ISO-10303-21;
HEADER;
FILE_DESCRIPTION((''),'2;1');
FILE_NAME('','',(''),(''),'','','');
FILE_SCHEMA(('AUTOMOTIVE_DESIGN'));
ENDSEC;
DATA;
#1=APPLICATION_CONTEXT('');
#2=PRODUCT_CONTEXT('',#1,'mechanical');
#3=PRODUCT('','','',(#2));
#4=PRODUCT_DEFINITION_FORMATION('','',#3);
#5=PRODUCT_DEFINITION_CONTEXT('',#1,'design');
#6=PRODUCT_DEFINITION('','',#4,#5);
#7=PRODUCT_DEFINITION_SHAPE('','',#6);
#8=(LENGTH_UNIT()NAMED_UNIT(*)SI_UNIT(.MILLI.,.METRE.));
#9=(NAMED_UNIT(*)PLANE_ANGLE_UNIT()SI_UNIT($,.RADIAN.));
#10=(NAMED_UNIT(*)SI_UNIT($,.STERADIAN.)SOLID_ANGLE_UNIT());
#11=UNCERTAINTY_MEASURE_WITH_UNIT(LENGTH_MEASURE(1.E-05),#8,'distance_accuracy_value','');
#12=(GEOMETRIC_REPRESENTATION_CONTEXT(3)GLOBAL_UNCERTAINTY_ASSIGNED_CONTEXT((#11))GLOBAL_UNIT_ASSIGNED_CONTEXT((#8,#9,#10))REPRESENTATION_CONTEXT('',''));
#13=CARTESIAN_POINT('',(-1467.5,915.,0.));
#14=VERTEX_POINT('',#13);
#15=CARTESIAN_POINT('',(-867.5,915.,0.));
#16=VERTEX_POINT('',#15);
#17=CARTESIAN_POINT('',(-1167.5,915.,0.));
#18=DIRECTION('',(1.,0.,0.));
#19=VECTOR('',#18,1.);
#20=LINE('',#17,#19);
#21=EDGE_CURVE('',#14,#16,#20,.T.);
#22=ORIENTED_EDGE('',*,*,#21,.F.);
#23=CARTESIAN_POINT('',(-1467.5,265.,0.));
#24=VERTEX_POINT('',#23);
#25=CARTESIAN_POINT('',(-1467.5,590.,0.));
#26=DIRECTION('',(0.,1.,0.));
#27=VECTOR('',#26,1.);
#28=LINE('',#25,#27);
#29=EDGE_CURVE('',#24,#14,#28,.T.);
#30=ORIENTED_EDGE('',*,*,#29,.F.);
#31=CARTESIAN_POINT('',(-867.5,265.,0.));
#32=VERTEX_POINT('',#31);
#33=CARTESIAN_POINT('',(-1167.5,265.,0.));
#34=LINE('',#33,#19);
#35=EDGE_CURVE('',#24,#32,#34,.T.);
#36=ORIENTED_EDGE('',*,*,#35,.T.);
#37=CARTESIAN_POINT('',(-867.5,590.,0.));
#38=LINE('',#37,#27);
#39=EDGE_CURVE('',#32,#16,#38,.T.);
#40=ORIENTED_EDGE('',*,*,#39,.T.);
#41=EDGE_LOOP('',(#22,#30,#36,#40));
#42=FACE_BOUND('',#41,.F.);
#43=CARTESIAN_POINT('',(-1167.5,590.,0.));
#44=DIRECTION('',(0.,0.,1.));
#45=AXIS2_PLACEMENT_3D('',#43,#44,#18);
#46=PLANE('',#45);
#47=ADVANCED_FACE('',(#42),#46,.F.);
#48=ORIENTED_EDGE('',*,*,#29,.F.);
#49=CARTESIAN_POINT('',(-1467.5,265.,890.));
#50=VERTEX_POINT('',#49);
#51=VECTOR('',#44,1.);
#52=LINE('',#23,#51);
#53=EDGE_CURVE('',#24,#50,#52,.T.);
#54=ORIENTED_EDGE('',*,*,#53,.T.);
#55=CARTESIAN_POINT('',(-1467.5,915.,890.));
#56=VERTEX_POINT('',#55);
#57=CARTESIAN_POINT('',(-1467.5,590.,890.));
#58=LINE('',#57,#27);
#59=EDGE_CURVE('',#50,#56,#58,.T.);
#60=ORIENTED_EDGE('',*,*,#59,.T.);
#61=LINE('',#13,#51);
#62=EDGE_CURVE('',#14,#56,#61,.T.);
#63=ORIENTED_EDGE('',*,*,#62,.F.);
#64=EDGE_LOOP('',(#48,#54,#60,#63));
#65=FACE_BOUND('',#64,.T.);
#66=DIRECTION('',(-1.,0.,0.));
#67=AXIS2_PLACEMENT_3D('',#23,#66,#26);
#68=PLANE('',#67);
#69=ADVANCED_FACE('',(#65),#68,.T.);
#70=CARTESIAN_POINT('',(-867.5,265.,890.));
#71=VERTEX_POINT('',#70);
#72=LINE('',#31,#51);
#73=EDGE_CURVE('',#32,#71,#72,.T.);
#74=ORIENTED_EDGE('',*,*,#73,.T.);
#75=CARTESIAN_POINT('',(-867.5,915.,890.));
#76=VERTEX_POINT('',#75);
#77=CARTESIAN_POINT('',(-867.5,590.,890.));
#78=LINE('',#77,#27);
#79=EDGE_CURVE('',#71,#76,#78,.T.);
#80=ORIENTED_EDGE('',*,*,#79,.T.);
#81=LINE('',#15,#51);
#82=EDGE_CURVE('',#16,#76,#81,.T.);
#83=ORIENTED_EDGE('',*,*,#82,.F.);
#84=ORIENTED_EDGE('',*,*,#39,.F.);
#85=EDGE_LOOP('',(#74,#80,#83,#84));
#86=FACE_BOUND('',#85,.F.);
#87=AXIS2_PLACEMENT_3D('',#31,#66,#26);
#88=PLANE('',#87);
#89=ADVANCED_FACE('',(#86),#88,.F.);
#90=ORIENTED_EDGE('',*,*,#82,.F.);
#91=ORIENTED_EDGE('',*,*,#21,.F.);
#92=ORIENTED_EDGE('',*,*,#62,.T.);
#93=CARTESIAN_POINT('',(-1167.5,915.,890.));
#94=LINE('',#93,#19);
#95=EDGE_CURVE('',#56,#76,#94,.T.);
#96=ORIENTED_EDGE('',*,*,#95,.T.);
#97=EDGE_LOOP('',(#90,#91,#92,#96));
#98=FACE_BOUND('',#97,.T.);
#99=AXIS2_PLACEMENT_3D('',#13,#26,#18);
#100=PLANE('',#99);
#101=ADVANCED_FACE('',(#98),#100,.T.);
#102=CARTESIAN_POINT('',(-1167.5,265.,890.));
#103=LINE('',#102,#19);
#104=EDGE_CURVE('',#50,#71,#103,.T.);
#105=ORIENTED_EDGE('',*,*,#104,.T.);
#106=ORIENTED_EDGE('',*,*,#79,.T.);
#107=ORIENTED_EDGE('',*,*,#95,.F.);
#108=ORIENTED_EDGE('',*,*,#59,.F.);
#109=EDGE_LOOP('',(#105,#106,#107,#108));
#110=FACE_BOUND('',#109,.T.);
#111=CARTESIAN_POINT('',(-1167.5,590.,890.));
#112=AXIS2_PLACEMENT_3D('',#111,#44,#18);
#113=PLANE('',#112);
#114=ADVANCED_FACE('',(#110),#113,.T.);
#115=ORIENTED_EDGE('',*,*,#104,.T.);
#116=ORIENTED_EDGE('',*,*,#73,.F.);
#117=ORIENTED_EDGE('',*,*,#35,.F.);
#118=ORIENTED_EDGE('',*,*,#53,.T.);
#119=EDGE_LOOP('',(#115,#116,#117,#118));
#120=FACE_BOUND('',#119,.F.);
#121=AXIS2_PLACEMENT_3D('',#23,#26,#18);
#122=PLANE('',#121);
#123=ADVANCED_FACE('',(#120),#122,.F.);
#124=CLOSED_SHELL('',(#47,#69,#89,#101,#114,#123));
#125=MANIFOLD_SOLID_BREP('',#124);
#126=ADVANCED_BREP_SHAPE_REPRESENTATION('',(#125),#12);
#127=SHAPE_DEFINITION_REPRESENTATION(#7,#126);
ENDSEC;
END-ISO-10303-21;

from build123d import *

# Parameters (mm, degrees)
F1_W     = 600
F1_H     = 650
F2_DEPTH = 890
F4_W     = 680
F4_H     = 970
F5_DEPTH = 3992


# Not quite as in the source:
# - an extrude ends at something that could not be found from the text; its depth is read off the source's solid


with BuildPart() as f2:
    # F1 (on Top) → F2 (new body)
    with BuildSketch(Plane.XY):
        with Locations((-1167.5, 590)):
            Rectangle(F1_W, F1_H)
    extrude(amount=F2_DEPTH)

    # F4 (on face) → F5 (cut, through all)
    with BuildSketch(Plane(origin=(1467.5, 0, 0), x_dir=(0, -1, 0), z_dir=(-1, 0, 0))):
        with Locations((-25, 1445)):
            Rectangle(F4_W, F4_H)
    extrude(amount=F5_DEPTH, mode=Mode.SUBTRACT)


solid = f2.part
